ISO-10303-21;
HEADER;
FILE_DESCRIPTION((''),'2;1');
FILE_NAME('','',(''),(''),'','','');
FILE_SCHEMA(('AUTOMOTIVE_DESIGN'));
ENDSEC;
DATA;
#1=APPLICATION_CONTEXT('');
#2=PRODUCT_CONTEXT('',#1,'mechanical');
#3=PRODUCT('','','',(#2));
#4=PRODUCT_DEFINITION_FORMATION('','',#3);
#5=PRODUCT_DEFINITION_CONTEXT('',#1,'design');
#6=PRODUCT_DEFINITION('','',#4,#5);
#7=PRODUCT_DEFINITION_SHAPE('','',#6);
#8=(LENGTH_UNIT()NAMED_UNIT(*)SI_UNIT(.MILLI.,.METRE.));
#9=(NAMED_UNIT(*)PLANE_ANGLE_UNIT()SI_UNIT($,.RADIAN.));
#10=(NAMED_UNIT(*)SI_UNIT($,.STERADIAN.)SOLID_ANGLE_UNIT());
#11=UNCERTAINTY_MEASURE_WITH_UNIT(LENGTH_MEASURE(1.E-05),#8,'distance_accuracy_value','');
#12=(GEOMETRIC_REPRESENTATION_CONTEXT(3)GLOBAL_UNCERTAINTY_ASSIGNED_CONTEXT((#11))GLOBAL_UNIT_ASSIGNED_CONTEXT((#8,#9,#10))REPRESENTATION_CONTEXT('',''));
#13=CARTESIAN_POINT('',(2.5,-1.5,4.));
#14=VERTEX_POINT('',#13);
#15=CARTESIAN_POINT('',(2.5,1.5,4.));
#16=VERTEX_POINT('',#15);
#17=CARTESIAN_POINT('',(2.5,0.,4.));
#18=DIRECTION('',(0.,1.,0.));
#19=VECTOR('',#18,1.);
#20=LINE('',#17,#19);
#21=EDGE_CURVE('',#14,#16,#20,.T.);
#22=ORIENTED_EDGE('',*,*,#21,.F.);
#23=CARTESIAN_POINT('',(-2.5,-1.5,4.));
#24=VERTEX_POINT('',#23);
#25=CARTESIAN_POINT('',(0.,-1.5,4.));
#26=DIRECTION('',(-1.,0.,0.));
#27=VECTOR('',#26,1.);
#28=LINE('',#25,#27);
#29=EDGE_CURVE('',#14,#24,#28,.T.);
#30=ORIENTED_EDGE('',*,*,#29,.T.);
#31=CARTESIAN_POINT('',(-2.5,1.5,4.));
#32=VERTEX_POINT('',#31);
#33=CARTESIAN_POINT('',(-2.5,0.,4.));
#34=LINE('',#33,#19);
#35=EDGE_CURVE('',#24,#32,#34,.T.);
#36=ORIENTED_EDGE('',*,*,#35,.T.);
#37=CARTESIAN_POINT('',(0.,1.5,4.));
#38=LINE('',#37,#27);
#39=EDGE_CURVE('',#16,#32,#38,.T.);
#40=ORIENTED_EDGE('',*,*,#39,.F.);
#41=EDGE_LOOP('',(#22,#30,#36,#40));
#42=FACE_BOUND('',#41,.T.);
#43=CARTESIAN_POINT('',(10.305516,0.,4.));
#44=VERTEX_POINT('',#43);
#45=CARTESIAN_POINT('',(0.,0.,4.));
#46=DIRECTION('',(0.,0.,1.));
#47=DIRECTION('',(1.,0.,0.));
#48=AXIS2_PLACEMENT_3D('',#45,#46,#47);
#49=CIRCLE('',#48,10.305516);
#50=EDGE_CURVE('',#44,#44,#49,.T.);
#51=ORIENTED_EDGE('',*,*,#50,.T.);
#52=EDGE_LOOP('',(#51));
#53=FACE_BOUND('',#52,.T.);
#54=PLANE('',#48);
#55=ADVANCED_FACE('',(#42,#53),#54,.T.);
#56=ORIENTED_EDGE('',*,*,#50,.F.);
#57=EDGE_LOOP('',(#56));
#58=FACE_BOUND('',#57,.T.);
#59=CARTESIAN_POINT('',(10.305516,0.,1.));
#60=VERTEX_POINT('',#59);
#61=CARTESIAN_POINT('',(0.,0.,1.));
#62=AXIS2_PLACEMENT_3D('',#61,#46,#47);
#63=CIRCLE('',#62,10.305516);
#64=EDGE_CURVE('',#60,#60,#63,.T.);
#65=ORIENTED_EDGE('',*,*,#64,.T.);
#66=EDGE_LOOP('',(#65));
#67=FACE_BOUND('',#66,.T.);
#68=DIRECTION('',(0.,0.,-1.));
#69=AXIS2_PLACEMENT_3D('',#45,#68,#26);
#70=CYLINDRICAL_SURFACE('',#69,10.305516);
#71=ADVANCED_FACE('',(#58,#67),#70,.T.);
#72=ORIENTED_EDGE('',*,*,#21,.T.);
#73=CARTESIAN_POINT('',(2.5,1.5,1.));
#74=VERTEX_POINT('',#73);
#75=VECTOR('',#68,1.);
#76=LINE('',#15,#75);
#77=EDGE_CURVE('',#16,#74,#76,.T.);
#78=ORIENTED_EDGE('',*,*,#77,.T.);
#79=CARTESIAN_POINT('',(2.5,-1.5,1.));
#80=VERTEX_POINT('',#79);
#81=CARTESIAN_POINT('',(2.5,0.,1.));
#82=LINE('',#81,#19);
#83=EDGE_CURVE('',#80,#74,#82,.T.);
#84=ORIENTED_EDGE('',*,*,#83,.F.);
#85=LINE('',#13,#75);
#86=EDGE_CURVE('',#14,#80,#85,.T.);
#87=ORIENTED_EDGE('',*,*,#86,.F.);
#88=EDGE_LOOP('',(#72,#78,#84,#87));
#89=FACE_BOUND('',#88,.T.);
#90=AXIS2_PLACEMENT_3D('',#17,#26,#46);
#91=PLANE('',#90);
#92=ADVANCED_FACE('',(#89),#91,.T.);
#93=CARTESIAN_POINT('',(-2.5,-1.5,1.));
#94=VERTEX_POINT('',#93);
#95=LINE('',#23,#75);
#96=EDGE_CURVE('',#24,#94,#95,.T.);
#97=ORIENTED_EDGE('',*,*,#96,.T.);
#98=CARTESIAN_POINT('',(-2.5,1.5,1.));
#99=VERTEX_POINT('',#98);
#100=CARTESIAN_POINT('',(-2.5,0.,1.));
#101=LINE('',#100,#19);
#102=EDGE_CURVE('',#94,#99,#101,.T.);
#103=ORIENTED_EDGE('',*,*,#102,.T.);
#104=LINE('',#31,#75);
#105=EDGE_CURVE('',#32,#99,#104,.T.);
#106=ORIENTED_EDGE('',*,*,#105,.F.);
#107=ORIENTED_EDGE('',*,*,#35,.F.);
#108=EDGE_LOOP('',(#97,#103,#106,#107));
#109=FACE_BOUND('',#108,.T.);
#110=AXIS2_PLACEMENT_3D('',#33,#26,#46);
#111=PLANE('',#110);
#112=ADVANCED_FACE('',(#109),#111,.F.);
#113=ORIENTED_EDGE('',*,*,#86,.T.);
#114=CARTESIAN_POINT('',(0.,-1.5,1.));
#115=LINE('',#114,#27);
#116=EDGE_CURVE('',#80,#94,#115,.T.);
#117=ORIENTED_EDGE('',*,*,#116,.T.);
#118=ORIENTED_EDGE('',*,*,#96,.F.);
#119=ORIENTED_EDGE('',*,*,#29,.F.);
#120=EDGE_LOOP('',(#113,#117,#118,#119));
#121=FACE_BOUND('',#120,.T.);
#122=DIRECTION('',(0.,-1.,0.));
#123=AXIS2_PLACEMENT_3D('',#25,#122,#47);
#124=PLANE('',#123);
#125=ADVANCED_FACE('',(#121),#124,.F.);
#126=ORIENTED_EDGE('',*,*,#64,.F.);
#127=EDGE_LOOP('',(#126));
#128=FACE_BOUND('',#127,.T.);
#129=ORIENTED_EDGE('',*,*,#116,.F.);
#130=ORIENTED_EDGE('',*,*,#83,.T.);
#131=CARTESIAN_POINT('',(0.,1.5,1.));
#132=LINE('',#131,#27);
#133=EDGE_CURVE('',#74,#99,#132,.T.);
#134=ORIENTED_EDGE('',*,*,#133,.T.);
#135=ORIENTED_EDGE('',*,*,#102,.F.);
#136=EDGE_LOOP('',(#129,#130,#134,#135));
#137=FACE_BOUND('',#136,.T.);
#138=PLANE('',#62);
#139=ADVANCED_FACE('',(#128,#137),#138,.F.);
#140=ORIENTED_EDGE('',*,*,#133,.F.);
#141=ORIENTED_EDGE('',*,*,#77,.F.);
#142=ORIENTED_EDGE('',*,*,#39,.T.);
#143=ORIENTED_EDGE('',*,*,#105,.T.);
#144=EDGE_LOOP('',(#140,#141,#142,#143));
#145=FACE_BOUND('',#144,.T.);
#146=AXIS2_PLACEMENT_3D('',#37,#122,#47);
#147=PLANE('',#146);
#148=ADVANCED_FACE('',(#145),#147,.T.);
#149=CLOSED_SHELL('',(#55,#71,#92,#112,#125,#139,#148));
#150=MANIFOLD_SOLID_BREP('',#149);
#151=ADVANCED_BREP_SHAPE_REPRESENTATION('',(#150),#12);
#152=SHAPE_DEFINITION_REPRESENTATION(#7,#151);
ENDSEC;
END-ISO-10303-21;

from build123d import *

# Parameters (mm, degrees)
SKETCH2_R           = 10.30551588
SKETCH2_W           = 5
SKETCH2_H           = 3
BOSS_EXTRUDE1_DEPTH = 3


# Read off the part's stored shape, not the designer's step: Gear 60pitch part02.STEP
with BuildPart() as part:
    # Sketch2 → Boss-Extrude1 (new body)
    with BuildSketch(Plane.XY.offset(1)):
        Circle(SKETCH2_R)
        Rectangle(SKETCH2_W, SKETCH2_H, mode=Mode.SUBTRACT)
    extrude(amount=BOSS_EXTRUDE1_DEPTH)


solid = part.part
